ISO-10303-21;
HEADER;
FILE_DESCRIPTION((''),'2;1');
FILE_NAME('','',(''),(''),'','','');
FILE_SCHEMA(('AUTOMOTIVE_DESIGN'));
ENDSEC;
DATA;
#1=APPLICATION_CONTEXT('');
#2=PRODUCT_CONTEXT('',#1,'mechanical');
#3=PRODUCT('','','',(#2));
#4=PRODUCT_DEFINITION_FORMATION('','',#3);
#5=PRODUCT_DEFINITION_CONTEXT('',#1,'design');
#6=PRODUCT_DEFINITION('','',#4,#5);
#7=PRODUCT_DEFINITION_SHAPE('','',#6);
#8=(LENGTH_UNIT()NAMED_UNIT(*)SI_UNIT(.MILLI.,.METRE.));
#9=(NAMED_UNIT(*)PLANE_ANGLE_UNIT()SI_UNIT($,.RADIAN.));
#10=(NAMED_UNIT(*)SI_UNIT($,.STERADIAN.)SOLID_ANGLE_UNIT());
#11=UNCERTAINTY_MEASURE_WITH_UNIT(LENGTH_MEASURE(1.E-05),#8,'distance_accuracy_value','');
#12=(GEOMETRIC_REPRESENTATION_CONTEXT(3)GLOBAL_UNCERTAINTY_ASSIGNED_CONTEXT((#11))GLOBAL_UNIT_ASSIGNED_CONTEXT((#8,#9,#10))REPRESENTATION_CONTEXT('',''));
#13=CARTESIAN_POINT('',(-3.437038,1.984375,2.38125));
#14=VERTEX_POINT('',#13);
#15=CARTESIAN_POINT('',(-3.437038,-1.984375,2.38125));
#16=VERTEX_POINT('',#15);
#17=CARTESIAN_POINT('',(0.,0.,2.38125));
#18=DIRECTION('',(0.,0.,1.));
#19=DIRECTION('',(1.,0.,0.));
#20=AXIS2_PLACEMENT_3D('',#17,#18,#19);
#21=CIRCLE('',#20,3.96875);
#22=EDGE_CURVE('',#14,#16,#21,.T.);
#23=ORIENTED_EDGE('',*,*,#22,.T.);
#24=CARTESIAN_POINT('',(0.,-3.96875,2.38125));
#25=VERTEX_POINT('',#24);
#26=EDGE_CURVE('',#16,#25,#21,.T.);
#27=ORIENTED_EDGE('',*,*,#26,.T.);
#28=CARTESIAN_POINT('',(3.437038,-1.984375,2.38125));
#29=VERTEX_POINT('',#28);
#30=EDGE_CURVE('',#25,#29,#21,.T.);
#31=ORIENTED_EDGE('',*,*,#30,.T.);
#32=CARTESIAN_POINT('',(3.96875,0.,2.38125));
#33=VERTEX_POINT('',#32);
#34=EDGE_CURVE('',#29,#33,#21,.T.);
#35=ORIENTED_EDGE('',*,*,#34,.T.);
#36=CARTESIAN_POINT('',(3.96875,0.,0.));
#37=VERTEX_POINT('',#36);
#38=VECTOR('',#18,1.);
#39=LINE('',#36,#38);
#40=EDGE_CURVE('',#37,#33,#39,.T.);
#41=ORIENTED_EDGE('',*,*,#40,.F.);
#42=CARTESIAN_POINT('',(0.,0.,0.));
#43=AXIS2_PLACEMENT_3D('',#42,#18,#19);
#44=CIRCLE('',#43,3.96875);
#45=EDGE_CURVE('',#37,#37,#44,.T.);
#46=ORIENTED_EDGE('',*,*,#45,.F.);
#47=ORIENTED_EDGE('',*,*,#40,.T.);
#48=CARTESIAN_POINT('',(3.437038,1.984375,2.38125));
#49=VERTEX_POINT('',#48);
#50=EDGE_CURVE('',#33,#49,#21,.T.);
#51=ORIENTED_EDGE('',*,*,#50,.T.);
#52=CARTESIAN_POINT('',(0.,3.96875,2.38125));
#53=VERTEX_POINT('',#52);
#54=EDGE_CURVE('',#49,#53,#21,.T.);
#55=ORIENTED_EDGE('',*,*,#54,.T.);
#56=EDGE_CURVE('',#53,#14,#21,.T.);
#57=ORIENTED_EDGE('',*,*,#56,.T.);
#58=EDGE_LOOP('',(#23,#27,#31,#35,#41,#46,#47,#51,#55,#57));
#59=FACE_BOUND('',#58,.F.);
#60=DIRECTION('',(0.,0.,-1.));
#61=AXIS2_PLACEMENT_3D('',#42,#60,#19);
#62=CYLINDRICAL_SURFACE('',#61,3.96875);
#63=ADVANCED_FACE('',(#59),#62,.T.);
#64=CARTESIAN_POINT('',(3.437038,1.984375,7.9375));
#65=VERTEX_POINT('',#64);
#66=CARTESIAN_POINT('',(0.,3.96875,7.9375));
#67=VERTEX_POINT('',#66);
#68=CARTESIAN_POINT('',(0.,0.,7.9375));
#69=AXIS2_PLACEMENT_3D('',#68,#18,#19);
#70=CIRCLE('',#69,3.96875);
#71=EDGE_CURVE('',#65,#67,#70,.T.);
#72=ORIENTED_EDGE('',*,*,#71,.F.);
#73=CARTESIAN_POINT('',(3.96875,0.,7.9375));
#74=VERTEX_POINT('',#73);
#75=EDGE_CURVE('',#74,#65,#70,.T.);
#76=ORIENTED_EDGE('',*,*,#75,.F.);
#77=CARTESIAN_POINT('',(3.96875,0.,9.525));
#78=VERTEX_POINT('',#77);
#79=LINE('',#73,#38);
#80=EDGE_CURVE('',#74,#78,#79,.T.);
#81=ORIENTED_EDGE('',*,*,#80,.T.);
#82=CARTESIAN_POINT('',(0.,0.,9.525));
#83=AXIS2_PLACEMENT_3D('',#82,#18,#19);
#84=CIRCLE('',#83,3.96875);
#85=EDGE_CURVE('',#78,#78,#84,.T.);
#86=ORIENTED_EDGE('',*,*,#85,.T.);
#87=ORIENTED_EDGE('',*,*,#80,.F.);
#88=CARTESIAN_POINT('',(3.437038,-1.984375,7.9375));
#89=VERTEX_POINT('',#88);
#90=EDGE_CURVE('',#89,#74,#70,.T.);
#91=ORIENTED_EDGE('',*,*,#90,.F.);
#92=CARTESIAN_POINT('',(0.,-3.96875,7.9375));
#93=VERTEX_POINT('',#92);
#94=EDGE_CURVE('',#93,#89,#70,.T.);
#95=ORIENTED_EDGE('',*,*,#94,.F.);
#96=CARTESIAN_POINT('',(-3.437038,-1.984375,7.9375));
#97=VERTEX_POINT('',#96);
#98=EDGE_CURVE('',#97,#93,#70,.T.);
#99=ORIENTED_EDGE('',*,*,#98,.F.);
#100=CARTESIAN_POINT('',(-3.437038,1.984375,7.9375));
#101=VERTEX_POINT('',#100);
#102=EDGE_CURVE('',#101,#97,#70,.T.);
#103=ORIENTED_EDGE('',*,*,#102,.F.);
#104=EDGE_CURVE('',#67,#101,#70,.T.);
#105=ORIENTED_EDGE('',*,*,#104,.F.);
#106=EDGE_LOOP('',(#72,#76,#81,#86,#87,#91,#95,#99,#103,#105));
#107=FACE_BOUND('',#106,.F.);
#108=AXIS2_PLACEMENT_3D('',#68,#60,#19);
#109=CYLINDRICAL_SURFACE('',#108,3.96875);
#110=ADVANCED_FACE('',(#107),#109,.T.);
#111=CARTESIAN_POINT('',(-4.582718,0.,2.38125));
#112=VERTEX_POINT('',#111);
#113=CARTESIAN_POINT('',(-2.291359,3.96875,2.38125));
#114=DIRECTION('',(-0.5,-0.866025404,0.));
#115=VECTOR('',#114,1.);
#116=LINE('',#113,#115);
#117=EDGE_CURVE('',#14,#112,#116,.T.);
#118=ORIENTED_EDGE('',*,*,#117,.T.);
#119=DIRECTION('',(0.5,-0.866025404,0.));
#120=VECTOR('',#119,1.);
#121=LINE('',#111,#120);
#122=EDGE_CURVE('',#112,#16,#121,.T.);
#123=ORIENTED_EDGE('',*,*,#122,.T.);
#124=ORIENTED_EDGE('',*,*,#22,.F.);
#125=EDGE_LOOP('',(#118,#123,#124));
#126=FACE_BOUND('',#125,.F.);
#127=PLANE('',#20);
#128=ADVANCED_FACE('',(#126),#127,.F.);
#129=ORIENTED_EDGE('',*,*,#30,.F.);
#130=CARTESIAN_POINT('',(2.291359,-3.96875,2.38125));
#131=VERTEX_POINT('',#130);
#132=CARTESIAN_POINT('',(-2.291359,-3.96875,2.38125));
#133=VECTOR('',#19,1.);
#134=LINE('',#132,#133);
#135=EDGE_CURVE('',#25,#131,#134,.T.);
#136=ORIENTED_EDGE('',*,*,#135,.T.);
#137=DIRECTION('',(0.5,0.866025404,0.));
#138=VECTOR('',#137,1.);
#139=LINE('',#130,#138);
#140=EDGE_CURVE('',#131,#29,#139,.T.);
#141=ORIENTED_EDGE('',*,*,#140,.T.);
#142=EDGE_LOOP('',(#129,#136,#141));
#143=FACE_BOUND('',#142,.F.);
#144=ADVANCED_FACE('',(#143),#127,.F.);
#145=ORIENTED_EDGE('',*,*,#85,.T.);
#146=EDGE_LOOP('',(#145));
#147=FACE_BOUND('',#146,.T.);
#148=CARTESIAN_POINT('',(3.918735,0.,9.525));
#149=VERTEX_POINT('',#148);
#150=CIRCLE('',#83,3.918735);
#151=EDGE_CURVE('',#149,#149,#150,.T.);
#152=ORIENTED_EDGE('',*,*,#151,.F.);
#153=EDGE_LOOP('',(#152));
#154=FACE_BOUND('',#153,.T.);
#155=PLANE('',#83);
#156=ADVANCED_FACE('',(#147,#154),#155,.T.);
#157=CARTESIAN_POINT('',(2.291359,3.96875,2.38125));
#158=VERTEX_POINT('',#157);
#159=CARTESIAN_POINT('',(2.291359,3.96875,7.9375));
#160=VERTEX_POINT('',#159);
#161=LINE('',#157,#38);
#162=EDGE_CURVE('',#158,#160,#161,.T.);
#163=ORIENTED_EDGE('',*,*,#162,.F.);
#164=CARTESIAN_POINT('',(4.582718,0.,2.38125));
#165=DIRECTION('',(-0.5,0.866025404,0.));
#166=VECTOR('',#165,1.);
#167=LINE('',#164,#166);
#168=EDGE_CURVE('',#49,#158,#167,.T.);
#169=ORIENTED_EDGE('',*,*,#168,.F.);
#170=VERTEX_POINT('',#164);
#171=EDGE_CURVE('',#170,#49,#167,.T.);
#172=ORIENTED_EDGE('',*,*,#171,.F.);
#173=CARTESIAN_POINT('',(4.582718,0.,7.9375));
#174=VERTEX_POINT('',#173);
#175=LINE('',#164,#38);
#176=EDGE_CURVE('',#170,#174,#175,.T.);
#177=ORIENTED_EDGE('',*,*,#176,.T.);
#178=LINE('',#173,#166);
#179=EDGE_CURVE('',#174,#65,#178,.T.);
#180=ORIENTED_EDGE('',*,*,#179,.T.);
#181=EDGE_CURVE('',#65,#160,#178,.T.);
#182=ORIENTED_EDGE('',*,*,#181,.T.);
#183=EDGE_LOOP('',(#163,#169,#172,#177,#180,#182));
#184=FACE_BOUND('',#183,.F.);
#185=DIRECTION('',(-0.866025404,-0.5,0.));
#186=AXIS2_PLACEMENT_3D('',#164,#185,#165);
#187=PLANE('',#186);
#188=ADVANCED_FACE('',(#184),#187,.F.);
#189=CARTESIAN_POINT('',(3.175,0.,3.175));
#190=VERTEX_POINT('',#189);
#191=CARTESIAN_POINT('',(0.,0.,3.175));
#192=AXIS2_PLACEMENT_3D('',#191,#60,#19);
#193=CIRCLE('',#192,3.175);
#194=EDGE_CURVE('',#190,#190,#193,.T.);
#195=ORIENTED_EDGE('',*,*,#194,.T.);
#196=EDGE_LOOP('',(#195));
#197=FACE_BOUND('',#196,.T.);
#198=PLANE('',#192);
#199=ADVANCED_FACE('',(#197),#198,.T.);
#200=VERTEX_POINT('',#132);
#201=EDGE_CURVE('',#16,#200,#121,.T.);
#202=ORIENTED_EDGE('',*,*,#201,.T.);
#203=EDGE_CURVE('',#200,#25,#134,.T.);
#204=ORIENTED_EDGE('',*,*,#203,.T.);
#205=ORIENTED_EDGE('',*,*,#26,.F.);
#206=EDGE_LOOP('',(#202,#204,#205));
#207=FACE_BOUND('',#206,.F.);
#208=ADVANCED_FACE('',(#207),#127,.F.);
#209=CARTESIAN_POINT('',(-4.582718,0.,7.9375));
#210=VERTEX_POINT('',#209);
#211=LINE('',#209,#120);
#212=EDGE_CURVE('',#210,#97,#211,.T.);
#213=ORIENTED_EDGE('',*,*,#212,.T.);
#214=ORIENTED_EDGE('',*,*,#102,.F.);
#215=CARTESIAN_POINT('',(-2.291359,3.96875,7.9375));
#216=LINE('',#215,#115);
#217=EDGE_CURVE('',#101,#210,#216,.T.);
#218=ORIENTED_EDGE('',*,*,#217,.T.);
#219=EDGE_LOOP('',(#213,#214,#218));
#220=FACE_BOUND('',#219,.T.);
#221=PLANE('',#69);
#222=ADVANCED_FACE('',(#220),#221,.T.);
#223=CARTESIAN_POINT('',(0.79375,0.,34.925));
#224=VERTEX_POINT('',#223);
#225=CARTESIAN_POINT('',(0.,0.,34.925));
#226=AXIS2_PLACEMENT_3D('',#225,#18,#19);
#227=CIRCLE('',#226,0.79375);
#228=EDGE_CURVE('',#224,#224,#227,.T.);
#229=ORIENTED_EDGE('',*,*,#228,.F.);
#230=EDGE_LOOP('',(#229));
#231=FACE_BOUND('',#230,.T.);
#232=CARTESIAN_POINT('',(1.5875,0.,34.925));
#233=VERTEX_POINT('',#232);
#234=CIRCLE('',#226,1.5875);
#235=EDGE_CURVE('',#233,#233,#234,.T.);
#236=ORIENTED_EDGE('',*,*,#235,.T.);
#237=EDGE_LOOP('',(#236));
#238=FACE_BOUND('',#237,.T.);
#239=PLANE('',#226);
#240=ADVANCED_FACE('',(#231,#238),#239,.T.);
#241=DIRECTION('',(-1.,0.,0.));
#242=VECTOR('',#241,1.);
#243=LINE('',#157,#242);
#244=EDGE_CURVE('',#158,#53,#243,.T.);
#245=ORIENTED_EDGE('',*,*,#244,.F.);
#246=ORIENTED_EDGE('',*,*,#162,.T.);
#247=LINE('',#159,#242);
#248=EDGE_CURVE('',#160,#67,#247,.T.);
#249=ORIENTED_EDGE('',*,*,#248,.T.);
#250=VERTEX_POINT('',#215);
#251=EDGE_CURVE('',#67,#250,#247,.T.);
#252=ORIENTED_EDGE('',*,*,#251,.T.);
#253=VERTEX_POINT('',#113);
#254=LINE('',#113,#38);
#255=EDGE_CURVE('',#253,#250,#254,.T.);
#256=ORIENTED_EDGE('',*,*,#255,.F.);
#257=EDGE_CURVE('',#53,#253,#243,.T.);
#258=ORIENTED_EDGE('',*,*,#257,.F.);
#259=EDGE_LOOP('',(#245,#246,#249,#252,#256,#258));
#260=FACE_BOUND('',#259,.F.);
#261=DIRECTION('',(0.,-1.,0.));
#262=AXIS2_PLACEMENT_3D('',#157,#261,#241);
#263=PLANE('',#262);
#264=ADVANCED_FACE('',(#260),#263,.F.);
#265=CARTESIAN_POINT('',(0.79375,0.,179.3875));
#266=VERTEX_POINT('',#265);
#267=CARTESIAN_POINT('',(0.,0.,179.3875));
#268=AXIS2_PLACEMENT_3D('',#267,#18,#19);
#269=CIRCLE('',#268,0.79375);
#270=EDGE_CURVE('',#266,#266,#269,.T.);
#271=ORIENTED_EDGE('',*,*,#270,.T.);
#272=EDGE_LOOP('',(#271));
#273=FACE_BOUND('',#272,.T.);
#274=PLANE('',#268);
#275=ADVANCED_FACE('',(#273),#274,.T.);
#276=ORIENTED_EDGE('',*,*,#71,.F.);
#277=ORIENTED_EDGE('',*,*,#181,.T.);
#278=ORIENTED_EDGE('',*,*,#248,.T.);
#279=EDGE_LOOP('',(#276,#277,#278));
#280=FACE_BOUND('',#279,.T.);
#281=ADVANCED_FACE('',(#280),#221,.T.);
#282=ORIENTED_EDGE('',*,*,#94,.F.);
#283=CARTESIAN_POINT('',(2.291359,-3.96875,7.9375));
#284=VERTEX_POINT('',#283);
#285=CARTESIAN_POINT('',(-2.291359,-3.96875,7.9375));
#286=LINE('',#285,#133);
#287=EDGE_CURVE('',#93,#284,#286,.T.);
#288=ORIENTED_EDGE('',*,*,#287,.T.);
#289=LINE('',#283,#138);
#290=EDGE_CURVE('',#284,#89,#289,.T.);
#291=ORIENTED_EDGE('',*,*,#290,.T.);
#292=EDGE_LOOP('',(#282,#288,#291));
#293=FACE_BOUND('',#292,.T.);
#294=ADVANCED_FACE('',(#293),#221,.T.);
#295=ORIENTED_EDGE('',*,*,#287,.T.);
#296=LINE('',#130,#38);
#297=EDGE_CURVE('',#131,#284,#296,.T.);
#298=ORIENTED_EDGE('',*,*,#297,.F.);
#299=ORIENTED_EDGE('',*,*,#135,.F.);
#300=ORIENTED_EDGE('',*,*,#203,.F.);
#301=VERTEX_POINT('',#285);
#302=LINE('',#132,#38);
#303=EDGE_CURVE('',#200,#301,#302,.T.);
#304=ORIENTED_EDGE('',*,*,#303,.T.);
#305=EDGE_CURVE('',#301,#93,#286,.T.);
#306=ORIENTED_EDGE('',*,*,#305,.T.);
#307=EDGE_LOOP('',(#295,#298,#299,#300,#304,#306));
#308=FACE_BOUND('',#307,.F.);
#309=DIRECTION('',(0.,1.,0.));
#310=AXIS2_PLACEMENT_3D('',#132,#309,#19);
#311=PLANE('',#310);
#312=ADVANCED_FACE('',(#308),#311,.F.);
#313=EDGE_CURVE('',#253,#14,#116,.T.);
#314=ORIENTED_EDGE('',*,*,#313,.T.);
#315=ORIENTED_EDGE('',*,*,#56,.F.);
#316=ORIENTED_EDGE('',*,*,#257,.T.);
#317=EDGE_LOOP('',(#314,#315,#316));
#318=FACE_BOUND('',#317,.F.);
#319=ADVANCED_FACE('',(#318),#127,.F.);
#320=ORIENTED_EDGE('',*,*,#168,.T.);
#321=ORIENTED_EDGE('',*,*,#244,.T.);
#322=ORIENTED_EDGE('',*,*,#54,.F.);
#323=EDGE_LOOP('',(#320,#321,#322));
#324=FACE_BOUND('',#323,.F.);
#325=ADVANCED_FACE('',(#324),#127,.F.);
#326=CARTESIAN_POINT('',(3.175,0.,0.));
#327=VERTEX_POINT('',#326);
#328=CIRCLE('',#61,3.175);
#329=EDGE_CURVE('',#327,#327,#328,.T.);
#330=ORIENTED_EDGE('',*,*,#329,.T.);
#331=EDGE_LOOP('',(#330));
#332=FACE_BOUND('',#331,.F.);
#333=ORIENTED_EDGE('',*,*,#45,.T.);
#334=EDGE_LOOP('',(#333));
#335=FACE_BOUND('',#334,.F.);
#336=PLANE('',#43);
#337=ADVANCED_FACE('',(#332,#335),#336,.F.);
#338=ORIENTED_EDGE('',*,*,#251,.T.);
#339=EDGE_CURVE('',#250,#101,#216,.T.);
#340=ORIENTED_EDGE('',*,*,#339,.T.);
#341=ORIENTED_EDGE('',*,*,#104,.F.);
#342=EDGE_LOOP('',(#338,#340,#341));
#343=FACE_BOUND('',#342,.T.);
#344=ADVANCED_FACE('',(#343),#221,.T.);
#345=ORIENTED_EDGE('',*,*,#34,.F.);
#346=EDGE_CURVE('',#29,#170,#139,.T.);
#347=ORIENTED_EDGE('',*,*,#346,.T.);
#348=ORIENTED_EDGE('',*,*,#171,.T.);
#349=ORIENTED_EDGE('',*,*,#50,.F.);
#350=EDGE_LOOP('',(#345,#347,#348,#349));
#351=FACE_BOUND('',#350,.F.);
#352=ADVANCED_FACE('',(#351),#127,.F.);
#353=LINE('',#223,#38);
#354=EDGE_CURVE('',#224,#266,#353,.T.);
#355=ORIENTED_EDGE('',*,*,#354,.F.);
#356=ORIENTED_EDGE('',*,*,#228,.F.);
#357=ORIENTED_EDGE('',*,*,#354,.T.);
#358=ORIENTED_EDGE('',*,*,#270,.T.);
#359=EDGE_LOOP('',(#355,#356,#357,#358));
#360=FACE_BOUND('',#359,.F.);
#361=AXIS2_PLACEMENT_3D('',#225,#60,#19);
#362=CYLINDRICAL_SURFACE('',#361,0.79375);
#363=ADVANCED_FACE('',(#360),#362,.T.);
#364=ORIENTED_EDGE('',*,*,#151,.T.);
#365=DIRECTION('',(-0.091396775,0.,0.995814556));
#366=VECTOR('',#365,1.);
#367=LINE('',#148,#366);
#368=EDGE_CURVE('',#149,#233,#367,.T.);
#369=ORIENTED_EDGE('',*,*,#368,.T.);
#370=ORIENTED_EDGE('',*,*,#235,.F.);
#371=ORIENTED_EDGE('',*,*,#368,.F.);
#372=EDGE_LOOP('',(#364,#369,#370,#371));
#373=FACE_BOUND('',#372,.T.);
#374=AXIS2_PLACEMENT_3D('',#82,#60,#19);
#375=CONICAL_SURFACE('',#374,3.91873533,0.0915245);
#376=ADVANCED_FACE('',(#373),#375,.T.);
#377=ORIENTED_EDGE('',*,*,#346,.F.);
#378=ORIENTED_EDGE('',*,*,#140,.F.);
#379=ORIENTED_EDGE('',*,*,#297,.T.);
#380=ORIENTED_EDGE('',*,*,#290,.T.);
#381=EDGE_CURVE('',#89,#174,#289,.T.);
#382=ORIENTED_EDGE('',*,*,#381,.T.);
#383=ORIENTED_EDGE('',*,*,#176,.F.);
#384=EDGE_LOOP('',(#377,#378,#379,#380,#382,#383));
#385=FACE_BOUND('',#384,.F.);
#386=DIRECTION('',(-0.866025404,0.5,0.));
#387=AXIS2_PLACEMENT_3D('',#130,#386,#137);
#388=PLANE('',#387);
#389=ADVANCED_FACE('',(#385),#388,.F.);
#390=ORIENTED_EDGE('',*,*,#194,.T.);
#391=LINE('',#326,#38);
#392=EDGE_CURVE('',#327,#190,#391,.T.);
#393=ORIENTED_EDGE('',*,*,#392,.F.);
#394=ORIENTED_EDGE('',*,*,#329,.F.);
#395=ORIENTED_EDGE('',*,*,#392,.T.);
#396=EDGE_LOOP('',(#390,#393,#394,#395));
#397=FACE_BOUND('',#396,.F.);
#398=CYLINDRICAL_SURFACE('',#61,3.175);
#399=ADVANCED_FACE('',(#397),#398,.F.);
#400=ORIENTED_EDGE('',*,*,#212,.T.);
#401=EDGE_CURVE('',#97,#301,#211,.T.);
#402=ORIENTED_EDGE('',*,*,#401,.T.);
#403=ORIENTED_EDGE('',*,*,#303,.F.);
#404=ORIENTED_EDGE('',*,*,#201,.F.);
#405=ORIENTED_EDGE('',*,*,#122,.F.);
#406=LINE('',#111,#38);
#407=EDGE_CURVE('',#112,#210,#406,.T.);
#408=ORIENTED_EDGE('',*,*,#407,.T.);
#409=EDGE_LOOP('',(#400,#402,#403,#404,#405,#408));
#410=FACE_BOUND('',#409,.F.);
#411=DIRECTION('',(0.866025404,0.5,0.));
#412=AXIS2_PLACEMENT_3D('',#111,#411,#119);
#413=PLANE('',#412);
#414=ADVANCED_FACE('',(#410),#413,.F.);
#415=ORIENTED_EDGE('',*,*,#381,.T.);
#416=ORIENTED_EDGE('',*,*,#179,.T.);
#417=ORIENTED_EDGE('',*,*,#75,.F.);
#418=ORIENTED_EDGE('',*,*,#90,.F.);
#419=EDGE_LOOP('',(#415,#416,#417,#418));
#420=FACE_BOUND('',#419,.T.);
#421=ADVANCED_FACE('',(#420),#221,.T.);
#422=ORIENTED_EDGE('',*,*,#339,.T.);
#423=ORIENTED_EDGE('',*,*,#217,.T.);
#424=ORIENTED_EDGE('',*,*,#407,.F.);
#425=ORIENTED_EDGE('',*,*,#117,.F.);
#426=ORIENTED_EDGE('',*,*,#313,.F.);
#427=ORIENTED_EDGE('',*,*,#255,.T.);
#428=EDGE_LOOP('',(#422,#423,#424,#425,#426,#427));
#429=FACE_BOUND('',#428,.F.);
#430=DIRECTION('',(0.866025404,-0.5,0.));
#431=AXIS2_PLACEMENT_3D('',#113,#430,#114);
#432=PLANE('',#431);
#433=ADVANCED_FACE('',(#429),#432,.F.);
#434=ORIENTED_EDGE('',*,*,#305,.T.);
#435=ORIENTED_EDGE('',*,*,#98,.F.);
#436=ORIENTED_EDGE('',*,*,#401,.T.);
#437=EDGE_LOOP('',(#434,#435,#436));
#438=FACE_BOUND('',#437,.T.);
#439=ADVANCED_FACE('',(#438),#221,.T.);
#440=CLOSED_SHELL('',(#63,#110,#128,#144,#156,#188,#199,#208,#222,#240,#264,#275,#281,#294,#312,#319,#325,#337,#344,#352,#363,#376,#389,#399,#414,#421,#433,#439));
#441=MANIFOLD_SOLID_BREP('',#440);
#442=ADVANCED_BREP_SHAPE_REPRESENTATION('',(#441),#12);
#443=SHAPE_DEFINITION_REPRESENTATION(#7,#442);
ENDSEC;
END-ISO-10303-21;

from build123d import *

# Parameters (mm, degrees)
F0_R      = 3.96875
F1_DEPTH  = 2.38125
F3_DEPTH  = 5.55625
F4_R      = 3.96875
F5_DEPTH  = 1.5875
F6_R      = 3.175
F7_DEPTH  = 3.175
F8_R      = 1.5875
F9_DEPTH  = 25.4
F12_R     = 0.79375
F13_DEPTH = 144.4625


# Not quite as in the source:
# - a length typed as a fraction of an inch, garbled in the dataset ("3 / 203.2 mm" for 3/8 in), is restored


with BuildPart() as f1:
    # F0 (on Top) → F1 (new body)
    with BuildSketch(Plane.XY):
        Circle(F0_R)
    extrude(amount=F1_DEPTH)

    # F2 (on face) → F3 (join)
    with BuildSketch(Plane.XY.offset(2.38125)):
        Polygon((2.2913588808, 3.96875), (-2.2913588808, 3.96875), (-4.5827177617, 0), (-2.2913588808, -3.96875), (2.2913588808, -3.96875), (4.5827177617, 0), align=None)
    extrude(amount=F3_DEPTH)

    # F4 (on face) → F5 (join)
    with BuildSketch(Plane.XY.offset(7.9375)):
        Circle(F4_R)
    extrude(amount=F5_DEPTH)

    # F6 (on face) → F7 (cut)
    with BuildSketch(Plane(origin=(0, 0, 0), x_dir=(1, 0, 0), z_dir=(0, 0, -1))):
        Circle(F6_R)
    extrude(amount=-F7_DEPTH, mode=Mode.SUBTRACT)

    # F8 (on face) → F9 (join)
    with BuildSketch(Plane.XY.offset(9.525)):
        Circle(F8_R)
    extrude(amount=F9_DEPTH)

    # F10 (on Front) → F11 (revolve)
    with BuildSketch(Plane.XZ):
        Polygon((1.5875, 34.925), (0, 34.925), (0, 9.525), (3.9187353296, 9.525), align=None)
    revolve(axis=Axis((0, 0, 9.525), (0, 0, 1)))

    # F12 (on face) → F13 (join)
    with BuildSketch(Plane.XY.offset(34.925)):
        Circle(F12_R)
    extrude(amount=F13_DEPTH)


solid = f1.part
